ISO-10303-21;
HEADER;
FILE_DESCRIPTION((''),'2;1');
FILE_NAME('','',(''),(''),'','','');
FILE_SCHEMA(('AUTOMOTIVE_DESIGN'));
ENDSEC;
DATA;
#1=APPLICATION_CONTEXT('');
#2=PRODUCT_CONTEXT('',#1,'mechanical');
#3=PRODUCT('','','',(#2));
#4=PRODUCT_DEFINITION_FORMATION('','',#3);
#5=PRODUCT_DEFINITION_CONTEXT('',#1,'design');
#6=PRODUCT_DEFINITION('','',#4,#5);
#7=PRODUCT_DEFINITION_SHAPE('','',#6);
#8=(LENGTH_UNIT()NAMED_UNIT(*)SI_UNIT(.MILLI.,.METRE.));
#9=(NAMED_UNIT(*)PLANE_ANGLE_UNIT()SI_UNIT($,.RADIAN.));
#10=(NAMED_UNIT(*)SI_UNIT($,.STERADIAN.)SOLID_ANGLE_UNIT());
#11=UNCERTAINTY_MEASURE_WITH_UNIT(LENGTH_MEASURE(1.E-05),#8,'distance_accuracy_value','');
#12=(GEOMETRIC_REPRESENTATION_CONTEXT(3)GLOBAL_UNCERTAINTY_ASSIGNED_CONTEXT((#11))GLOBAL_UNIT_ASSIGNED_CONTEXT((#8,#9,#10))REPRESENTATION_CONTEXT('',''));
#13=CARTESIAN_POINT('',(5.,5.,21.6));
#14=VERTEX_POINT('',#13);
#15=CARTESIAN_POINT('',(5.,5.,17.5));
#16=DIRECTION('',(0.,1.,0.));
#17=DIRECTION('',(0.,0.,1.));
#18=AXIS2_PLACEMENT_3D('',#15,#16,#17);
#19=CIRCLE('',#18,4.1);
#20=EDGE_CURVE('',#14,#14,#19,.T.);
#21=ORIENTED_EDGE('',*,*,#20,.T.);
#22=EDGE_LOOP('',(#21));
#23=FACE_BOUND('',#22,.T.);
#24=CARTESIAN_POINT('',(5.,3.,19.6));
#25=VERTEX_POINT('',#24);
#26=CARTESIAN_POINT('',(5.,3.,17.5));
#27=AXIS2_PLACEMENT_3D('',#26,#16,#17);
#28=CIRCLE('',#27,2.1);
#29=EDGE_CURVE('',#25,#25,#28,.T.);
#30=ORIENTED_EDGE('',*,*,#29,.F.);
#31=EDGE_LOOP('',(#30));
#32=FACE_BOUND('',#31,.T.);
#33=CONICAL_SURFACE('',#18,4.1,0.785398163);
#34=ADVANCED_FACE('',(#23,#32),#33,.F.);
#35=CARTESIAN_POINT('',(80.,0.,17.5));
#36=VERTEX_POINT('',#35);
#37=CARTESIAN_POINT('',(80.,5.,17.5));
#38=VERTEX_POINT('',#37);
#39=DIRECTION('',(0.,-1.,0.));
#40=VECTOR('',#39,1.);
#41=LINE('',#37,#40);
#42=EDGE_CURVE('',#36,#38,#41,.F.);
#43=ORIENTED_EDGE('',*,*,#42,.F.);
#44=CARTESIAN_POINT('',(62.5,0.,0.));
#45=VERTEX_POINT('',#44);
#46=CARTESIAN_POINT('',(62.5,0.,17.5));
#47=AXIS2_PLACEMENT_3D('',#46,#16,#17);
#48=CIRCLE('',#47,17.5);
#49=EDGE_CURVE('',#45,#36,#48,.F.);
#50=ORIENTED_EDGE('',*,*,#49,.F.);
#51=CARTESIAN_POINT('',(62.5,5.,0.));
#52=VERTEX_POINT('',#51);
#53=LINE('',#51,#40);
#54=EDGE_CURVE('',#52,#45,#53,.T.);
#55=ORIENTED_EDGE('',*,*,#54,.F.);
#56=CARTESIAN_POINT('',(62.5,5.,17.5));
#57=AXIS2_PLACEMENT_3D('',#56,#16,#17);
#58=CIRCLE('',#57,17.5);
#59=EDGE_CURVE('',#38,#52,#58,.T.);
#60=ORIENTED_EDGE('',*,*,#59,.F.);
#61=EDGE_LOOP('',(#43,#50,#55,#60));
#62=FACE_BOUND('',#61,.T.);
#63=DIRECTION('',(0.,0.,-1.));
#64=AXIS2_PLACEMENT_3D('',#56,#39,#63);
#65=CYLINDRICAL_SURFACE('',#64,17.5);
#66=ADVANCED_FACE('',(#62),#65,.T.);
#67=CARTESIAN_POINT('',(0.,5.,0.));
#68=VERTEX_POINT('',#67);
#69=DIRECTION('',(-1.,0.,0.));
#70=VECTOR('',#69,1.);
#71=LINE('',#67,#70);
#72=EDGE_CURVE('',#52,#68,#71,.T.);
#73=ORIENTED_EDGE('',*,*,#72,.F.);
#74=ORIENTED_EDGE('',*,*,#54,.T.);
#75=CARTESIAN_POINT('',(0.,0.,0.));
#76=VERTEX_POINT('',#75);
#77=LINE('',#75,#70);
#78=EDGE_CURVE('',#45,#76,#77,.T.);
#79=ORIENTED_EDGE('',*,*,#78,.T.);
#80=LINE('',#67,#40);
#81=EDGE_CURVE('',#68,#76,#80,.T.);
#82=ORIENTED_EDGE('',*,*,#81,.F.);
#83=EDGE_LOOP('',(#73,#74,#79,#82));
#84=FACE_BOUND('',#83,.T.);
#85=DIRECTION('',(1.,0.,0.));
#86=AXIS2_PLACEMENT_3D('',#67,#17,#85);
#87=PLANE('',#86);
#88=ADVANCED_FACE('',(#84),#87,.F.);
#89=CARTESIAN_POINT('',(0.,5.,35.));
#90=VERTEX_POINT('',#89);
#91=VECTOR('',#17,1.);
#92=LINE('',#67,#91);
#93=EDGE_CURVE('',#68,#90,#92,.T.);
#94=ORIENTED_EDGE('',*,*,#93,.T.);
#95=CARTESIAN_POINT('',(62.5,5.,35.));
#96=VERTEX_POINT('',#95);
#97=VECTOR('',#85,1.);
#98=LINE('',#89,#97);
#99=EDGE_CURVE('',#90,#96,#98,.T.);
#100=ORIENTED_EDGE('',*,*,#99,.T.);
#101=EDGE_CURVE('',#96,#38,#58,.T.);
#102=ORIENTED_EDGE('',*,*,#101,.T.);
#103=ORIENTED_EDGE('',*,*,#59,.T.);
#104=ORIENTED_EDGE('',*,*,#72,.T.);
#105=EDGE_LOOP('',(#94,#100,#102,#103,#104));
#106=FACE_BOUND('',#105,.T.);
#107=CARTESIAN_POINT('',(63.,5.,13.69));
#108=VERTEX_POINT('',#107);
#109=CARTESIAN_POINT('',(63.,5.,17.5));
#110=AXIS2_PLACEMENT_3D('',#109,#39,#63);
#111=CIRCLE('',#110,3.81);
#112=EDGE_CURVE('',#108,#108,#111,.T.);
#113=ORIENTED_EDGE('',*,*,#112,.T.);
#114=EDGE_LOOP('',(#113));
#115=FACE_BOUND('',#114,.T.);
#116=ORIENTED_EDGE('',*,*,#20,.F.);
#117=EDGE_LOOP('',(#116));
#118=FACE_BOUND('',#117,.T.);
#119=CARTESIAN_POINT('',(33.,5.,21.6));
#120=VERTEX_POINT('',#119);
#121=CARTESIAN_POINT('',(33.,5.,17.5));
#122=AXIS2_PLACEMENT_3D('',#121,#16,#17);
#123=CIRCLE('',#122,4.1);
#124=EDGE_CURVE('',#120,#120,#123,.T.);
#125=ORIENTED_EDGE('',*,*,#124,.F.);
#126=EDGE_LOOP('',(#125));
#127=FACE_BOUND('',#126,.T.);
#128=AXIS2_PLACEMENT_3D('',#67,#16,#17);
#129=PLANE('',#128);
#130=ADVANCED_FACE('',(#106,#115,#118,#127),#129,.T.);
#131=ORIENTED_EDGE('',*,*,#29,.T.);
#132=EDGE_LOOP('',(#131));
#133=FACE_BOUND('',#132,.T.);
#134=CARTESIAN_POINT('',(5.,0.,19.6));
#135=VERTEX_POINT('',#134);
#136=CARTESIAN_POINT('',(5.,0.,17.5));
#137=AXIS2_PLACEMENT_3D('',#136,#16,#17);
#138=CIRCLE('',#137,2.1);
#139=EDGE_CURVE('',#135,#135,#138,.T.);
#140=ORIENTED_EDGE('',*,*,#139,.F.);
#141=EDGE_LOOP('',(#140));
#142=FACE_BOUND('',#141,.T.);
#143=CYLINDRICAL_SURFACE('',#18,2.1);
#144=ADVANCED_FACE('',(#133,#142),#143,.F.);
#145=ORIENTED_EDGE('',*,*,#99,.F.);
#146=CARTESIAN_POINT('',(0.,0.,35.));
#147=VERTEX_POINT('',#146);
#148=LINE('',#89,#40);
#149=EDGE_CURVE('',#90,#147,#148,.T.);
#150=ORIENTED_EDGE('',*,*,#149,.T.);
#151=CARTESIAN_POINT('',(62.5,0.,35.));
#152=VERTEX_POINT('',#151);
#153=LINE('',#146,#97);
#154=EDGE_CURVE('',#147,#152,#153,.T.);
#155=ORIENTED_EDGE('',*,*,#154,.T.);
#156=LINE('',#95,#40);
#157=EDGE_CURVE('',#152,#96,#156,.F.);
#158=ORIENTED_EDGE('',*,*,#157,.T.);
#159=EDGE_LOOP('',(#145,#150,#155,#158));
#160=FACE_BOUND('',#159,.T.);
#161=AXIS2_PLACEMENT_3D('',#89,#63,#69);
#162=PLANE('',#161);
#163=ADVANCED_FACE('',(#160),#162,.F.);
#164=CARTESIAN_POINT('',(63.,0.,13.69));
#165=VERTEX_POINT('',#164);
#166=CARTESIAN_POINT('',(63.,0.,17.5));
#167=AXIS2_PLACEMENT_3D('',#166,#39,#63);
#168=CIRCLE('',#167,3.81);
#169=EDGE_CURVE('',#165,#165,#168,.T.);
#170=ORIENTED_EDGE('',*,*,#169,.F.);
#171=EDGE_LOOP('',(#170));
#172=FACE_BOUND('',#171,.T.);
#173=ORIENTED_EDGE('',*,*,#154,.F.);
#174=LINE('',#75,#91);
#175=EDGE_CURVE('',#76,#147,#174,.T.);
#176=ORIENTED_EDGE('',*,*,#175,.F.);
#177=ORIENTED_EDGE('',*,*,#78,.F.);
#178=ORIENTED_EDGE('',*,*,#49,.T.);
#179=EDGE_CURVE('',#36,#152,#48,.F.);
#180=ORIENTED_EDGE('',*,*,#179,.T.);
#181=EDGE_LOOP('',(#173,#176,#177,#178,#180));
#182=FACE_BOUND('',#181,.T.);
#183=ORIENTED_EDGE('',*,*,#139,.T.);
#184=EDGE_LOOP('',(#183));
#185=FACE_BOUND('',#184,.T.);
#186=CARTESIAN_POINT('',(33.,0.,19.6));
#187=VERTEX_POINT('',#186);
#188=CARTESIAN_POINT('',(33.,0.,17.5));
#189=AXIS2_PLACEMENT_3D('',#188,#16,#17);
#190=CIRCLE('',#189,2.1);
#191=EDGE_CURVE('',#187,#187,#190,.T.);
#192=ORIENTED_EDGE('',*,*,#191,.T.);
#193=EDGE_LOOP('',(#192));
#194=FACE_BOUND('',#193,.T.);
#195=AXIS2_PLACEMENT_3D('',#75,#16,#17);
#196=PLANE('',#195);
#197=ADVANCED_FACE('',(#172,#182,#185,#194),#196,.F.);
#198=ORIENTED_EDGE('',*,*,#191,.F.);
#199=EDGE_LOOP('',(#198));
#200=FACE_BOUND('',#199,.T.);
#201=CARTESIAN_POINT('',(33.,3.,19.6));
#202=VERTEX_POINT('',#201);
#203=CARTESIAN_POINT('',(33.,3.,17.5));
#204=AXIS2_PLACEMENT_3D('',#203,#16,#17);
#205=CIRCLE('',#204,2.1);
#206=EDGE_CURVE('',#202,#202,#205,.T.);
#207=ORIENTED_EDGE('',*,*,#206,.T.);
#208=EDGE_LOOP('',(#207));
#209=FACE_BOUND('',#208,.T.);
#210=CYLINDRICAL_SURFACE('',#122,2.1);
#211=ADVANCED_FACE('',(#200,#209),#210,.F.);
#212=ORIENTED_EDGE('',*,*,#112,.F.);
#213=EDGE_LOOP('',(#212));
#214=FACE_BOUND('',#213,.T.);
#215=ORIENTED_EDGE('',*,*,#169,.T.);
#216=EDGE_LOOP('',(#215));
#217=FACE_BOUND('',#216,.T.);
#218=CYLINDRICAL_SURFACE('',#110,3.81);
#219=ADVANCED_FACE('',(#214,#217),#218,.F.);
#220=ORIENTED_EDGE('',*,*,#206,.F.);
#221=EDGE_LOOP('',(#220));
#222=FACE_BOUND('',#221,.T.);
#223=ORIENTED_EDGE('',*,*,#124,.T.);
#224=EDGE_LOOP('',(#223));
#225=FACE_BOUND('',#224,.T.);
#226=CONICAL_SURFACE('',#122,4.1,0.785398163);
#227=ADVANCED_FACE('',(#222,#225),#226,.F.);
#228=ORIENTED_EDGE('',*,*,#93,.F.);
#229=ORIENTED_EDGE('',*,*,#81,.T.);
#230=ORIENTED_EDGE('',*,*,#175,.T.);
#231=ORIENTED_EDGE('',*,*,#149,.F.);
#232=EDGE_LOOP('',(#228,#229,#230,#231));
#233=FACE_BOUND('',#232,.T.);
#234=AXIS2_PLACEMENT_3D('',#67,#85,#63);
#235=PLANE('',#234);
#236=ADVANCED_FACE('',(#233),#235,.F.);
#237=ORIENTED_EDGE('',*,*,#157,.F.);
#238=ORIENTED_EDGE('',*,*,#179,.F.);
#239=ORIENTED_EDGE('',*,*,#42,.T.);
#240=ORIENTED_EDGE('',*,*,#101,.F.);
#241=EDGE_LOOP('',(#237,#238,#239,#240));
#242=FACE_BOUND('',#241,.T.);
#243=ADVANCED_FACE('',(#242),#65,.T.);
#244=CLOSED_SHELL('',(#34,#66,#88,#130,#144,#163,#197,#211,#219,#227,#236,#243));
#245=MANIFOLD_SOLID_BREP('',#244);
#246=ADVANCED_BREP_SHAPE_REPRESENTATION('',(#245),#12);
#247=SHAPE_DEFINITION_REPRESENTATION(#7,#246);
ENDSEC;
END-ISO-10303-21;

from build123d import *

# Parameters (mm, degrees)
SKETCH1_W                                         = 80
SKETCH1_H                                         = 35
BOSS_EXTRUDE1_DEPTH                               = 5
CSK_FOR_M3_5_FLAT_HEAD_MACHINE_SCREW1_D           = 4.2
CSK_FOR_M3_5_FLAT_HEAD_MACHINE_SCREW1_CSINK_D     = 8.2
CSK_FOR_M3_5_FLAT_HEAD_MACHINE_SCREW1_CSINK_ANGLE = 90
SKETCH5_R                                         = 3.81
CUT_EXTRUDE1_DEPTH                                = 5
FILLET1_R                                         = 17.5


with BuildPart() as part:
    # Sketch1 → Boss-Extrude1 (new body)
    with BuildSketch(Plane(origin=(0, 0, 0), x_dir=(1, 0, 0), z_dir=(0, 1, 0))):
        with Locations((40, -17.5)):
            Rectangle(SKETCH1_W, SKETCH1_H)
    extrude(amount=BOSS_EXTRUDE1_DEPTH)

    # CSK for M3.5 Flat Head Machine Screw1 (through all)
    with Locations(Plane(origin=(0, 5, 0), x_dir=(1, 0, 0), z_dir=(0, 1, 0))):
        with Locations((33, -17.5), (5, -17.5)):
            CounterSinkHole(CSK_FOR_M3_5_FLAT_HEAD_MACHINE_SCREW1_D / 2, CSK_FOR_M3_5_FLAT_HEAD_MACHINE_SCREW1_CSINK_D / 2, counter_sink_angle=CSK_FOR_M3_5_FLAT_HEAD_MACHINE_SCREW1_CSINK_ANGLE)

    # Sketch5 → Cut-Extrude1 (cut)
    with BuildSketch(Plane.XZ):
        with Locations(Location((63, 17.5, 0), (0, 0, 270))):
            Circle(SKETCH5_R)
    extrude(amount=-CUT_EXTRUDE1_DEPTH, mode=Mode.SUBTRACT)

    # Fillet1
    fillet1_edges = [part.edges().sort_by_distance(p)[0] for p in [
        (80, 2.5, 35),
        (80, 2.5, 0),
    ]]
    fillet(fillet1_edges, radius=FILLET1_R - 0.0001)  # a hair under: the kernel refuses the full size


solid = part.part
